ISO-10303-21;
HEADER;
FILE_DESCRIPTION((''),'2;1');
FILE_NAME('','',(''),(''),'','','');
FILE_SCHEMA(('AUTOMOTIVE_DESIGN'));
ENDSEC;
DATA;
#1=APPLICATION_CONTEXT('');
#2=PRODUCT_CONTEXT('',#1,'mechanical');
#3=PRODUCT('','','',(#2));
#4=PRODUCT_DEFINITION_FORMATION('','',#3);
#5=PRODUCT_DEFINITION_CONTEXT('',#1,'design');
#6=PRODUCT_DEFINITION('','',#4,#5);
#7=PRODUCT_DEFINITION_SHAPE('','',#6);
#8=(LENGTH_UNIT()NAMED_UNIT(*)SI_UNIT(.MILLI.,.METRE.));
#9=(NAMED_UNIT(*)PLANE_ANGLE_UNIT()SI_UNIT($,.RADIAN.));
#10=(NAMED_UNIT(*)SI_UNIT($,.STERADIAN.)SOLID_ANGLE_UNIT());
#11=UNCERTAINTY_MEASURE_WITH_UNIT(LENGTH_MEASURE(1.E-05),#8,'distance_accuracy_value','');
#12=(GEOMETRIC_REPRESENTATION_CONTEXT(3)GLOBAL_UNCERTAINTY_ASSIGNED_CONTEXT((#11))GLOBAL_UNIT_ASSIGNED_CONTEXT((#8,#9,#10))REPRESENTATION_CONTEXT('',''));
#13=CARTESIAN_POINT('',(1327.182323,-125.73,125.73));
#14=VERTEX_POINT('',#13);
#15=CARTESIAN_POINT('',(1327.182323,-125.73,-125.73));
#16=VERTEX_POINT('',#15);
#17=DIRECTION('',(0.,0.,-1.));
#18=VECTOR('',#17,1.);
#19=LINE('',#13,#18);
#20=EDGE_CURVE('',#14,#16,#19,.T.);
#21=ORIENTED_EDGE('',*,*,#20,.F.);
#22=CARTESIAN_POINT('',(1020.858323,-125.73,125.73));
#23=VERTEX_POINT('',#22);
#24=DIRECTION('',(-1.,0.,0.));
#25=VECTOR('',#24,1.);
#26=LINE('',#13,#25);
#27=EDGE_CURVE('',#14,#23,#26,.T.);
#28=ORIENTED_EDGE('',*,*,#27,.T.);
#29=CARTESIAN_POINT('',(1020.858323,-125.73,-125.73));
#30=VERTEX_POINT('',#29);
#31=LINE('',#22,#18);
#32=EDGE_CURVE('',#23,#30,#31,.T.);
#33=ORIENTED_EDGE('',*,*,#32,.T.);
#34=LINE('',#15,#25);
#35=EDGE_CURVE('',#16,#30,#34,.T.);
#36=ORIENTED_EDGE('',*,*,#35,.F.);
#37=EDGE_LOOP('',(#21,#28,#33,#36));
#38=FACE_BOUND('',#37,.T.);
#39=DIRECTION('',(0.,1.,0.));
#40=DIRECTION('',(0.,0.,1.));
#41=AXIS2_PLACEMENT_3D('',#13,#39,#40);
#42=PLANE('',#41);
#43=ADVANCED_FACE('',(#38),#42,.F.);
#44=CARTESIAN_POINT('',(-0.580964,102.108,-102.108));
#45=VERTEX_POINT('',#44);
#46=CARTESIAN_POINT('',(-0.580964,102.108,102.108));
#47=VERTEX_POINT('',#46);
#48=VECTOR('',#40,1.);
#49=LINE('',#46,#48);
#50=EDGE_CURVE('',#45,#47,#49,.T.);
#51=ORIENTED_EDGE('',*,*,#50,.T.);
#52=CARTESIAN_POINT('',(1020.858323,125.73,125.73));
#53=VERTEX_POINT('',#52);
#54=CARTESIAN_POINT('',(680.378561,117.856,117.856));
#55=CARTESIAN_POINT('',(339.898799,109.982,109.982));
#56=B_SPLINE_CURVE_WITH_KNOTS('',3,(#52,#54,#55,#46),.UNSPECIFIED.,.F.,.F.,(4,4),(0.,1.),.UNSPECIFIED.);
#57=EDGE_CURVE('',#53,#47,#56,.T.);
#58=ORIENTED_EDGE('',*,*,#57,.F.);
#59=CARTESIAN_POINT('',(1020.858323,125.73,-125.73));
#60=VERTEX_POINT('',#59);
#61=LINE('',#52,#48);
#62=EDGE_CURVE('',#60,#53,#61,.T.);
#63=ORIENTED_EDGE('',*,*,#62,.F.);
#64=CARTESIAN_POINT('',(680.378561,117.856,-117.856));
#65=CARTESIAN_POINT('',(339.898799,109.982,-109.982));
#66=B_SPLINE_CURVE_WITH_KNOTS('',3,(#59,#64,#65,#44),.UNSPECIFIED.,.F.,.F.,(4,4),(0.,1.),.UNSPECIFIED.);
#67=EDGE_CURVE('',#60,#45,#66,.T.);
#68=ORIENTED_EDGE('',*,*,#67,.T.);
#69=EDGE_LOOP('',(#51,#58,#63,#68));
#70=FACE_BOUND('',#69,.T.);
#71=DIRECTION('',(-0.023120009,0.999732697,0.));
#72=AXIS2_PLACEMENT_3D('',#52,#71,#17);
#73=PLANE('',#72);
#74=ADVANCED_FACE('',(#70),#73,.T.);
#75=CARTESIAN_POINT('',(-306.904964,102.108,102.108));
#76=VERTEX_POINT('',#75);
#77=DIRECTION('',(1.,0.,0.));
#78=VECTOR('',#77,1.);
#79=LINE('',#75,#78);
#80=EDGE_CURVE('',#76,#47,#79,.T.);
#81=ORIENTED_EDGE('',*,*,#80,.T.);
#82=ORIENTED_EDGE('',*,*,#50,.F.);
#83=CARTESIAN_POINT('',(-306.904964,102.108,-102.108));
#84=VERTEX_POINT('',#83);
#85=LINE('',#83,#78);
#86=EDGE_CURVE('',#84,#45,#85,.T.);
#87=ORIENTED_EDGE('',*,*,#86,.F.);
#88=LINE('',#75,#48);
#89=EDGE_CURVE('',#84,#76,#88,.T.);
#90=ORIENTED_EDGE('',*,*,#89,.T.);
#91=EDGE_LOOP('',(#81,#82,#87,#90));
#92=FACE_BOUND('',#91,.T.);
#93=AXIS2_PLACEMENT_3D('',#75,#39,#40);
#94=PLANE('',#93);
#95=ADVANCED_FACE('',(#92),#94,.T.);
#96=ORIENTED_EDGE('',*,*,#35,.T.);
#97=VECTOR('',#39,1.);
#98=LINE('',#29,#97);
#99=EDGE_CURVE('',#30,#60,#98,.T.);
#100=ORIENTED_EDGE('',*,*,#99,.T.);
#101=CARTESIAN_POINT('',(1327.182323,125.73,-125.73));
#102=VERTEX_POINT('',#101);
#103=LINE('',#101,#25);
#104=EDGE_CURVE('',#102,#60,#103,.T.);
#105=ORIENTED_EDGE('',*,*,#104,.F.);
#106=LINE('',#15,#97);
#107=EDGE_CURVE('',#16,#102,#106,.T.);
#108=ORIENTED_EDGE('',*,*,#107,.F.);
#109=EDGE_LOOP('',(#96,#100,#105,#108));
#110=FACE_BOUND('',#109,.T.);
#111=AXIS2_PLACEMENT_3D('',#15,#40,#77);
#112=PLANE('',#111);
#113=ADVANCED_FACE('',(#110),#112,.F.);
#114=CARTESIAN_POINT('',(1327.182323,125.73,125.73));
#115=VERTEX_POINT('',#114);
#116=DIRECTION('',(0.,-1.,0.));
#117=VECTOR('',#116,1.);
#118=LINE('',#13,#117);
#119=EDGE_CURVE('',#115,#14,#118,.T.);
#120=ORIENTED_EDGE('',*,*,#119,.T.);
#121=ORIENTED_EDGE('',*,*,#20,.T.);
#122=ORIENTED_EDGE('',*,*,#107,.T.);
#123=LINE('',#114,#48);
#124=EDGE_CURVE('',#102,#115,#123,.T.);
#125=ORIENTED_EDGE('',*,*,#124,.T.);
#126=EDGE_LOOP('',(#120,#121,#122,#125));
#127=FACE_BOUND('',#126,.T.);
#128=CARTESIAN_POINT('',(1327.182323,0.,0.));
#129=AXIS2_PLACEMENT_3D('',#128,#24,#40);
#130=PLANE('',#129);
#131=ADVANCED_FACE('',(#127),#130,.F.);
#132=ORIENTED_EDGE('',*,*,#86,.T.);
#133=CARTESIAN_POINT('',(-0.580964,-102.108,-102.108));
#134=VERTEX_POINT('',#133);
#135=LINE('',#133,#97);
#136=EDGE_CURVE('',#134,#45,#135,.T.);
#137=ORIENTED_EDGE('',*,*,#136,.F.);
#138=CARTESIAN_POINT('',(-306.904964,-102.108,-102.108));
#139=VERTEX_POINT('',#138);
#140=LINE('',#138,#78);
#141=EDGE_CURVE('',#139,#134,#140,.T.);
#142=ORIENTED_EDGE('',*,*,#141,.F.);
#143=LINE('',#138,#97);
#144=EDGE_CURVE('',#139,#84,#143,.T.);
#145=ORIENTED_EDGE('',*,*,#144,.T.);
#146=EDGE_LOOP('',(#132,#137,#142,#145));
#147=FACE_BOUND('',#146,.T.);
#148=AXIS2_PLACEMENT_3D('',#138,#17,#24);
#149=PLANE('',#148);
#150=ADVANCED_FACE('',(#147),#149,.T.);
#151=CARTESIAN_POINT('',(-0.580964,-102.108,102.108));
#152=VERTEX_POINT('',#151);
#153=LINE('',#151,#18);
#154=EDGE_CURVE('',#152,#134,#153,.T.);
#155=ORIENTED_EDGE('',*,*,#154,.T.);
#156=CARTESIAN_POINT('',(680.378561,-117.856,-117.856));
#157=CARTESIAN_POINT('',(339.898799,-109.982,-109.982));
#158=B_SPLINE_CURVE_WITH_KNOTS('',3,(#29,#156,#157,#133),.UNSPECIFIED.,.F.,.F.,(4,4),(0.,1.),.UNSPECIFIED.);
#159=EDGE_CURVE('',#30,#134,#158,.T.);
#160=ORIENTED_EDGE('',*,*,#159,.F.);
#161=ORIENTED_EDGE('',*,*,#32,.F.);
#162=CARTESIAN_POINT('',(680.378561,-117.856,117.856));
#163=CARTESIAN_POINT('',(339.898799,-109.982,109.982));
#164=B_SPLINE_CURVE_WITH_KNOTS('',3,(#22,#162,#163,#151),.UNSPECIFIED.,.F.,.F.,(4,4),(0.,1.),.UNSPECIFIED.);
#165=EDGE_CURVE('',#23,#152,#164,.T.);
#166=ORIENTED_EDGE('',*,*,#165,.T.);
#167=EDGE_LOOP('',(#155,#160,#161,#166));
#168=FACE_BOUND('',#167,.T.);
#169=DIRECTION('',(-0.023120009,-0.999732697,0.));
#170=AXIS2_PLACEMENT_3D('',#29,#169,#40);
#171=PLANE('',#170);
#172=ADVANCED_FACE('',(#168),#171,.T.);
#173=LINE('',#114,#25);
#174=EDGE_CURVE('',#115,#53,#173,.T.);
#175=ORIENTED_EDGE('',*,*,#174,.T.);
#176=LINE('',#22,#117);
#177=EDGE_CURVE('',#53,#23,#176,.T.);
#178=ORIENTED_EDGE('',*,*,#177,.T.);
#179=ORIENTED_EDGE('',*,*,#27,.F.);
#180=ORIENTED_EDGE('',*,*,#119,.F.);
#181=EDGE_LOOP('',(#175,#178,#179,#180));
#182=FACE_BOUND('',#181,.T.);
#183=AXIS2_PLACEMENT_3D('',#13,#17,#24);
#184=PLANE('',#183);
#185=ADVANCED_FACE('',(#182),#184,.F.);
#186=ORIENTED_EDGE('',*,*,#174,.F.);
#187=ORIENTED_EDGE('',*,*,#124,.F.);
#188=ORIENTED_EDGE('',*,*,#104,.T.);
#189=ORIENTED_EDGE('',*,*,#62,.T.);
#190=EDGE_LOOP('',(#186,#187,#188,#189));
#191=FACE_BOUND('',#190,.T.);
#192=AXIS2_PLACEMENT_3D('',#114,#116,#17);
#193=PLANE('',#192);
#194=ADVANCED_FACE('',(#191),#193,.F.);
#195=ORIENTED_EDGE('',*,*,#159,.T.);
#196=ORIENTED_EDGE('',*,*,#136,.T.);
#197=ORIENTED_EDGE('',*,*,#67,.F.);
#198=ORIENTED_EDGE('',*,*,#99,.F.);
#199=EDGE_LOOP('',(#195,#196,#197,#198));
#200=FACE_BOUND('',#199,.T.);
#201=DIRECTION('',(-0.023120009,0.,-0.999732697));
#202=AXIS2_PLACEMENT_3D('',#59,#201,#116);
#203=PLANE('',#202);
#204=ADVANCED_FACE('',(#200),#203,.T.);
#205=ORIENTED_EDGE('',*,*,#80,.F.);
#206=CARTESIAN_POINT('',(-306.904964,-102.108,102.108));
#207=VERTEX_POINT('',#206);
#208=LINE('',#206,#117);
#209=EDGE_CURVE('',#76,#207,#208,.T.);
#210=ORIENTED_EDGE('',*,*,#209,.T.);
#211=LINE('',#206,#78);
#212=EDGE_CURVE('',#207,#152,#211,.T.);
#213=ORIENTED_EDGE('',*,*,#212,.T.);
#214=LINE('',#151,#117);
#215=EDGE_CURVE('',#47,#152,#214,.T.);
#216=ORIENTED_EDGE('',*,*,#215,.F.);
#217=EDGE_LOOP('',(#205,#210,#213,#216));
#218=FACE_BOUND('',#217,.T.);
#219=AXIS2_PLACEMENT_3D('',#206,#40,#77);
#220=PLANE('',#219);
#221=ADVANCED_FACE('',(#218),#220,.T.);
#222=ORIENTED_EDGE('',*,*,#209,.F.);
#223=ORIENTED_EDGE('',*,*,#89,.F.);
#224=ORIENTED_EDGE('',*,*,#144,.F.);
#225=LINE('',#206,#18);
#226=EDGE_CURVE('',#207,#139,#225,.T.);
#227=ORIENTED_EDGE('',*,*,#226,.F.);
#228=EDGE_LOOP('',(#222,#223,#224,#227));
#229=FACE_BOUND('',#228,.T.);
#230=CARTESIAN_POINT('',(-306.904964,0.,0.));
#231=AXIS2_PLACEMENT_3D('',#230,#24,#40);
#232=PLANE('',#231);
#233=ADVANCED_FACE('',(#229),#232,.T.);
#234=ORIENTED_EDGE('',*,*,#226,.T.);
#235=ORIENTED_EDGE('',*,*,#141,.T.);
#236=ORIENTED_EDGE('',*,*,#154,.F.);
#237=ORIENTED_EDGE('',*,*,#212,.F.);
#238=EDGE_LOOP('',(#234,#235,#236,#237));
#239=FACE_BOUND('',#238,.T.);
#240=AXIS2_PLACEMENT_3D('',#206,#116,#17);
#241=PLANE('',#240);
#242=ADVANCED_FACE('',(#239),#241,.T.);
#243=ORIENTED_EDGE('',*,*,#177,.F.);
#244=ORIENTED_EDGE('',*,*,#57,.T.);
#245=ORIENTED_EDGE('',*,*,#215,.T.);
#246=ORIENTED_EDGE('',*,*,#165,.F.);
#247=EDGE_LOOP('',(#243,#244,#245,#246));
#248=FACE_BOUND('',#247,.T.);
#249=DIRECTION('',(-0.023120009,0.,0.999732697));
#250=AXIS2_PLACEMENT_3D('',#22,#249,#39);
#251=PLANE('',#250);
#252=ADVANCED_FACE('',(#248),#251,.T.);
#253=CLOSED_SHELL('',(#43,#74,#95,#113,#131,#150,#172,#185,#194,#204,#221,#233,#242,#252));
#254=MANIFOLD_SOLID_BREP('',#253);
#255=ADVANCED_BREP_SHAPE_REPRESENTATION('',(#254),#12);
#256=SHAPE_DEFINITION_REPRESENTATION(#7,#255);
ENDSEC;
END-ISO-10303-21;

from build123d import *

# Parameters (mm, degrees)
LOFT1_OUTLINE_W     = 204.216
LOFT1_OUTLINE_H     = 204.216
LOFT1_DEPTH         = 1021.439287055
LOFT1_DRAFT         = -1.324797
SKETCH3_2_W         = 251.46
SKETCH3_2_H         = 251.46
BOSS_EXTRUDE1_DEPTH = 306.324
SKETCH2_2_W         = 204.216
SKETCH2_2_H         = 204.216
BOSS_EXTRUDE2_DEPTH = 306.324


# Read off the part's stored shape, not the designer's step: Loft1
with BuildPart() as part:
    # Loft1 outline → Loft1 (with draft: the straight prism first)
    with BuildSketch(Plane.YZ.offset(-0.580963743)):
        Rectangle(LOFT1_OUTLINE_W, LOFT1_OUTLINE_H)
    extrude(amount=LOFT1_DEPTH)
    # Loft1: the draft: its side faces are tilted about the plane it starts from
    loft1_sides = [part.faces().sort_by_distance(p)[0] for p in [
        (510.138679785, 102.108, 0),
        (510.138679785, 0, 102.108),
        (510.138679785, -102.108, 0),
        (510.138679785, 0, -102.108),
    ]]
    draft(loft1_sides, Plane.YZ.offset(-0.580963743), LOFT1_DRAFT)

    # Sketch3<2> → Boss-Extrude1 (add)
    with BuildSketch(Plane(origin=(1020.858323313, 0, 0), x_dir=(0, 0, -1), z_dir=(1, 0, 0))):
        Rectangle(SKETCH3_2_W, SKETCH3_2_H)
    extrude(amount=BOSS_EXTRUDE1_DEPTH)

    # Sketch2<2> → Boss-Extrude2 (add)
    with BuildSketch(Plane(origin=(-0.580963743, 0, 0), x_dir=(0, 0, -1), z_dir=(1, 0, 0))):
        Rectangle(SKETCH2_2_W, SKETCH2_2_H)
    extrude(amount=-BOSS_EXTRUDE2_DEPTH)


solid = part.part
